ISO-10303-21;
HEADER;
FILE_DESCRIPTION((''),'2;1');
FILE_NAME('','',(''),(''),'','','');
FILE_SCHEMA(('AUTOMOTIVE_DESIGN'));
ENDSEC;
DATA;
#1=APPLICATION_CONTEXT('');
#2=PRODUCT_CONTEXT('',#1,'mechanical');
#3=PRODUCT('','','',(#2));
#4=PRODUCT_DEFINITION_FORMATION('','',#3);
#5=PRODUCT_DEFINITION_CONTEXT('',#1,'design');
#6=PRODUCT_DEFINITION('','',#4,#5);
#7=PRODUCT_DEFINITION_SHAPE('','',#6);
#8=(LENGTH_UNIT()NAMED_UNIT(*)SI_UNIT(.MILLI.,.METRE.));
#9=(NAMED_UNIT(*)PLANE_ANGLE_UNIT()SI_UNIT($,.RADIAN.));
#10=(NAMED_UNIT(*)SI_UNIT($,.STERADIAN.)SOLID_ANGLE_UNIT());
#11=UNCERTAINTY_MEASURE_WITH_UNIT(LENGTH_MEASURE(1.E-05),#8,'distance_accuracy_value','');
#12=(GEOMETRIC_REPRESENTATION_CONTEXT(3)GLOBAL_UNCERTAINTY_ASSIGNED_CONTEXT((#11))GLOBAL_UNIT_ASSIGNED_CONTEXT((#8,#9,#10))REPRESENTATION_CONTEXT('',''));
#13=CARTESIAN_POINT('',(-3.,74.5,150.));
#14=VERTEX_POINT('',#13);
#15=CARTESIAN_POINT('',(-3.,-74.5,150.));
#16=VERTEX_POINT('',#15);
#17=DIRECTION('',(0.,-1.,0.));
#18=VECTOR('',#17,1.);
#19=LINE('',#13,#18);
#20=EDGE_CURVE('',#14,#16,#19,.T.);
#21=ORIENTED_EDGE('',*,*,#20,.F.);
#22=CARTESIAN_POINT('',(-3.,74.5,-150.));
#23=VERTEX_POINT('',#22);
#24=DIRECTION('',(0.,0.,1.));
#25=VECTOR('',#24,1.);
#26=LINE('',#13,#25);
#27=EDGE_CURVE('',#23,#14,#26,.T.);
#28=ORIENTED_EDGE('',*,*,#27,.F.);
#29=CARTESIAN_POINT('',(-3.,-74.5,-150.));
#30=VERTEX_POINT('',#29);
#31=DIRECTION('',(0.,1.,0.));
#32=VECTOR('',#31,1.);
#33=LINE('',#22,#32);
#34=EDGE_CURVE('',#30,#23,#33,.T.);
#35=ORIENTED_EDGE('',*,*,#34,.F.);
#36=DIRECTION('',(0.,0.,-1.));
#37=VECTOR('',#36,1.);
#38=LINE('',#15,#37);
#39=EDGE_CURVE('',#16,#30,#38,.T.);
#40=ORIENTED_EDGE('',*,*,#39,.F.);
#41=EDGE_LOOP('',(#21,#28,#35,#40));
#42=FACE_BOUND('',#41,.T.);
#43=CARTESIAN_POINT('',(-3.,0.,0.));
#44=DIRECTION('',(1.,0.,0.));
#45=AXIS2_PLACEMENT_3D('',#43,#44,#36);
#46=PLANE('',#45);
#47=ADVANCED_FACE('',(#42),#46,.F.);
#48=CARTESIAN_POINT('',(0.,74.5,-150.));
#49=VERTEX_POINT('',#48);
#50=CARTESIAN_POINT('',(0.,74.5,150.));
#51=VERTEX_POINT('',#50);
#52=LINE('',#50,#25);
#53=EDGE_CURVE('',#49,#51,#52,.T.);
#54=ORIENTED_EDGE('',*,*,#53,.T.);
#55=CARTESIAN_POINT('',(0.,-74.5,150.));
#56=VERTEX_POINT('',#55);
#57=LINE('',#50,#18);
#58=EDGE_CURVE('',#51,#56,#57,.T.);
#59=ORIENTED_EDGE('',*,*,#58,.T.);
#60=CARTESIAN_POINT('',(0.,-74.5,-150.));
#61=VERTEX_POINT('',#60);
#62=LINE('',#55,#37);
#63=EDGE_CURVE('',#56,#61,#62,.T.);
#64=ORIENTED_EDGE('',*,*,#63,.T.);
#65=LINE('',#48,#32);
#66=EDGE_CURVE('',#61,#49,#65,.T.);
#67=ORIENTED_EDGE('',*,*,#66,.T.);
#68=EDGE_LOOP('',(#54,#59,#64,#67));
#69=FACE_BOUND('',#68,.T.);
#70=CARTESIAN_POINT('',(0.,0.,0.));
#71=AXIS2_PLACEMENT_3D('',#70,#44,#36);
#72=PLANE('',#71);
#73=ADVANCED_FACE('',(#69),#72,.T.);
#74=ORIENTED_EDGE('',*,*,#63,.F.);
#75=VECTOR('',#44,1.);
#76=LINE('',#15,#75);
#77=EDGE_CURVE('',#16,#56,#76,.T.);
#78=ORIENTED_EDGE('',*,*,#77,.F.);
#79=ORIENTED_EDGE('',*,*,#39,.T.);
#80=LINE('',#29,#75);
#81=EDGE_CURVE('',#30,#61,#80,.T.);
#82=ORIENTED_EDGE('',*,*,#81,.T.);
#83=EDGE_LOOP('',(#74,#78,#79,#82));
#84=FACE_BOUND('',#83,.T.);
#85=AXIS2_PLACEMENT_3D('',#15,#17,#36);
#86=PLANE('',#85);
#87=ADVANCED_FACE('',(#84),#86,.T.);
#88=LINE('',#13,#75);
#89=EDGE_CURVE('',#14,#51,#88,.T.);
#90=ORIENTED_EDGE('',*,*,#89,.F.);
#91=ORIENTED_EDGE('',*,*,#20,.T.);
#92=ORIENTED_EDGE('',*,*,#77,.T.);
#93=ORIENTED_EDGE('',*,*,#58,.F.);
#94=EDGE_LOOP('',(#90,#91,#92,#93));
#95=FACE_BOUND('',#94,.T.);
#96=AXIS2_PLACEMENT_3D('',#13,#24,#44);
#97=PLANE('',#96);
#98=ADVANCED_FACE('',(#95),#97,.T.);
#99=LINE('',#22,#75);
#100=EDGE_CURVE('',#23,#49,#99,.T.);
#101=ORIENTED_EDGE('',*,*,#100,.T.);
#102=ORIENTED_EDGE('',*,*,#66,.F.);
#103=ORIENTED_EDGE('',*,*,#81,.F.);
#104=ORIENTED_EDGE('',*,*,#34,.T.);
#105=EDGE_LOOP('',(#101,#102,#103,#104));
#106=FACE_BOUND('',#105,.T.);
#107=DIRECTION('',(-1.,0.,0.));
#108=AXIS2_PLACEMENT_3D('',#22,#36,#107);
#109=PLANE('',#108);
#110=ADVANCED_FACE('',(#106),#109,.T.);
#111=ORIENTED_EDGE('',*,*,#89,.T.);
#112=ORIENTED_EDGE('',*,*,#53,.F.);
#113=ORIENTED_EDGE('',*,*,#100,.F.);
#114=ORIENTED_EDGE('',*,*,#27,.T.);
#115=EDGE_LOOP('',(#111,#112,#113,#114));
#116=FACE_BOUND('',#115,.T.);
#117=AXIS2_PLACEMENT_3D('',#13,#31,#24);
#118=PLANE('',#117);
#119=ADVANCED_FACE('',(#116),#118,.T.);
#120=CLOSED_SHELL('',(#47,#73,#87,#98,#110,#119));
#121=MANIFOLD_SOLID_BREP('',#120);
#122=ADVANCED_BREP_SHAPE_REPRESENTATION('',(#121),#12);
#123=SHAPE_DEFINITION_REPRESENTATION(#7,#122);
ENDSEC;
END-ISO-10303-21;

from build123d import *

# Parameters (mm, degrees)
SKETCH_1_W             = 300
SKETCH_1_H             = 149
SM_BASE_FLANGE_1_DEPTH = 3


# Sheet-metal steps are written as plain solids
with BuildPart() as part:
    # Sketch 1 → Базовая кромка1 (new body)
    with BuildSketch(Plane(origin=(0, 0, 0), x_dir=(0, 0, -1), z_dir=(1, 0, 0))):
        Rectangle(SKETCH_1_W, SKETCH_1_H)
    extrude(amount=-SM_BASE_FLANGE_1_DEPTH)


solid = part.part
